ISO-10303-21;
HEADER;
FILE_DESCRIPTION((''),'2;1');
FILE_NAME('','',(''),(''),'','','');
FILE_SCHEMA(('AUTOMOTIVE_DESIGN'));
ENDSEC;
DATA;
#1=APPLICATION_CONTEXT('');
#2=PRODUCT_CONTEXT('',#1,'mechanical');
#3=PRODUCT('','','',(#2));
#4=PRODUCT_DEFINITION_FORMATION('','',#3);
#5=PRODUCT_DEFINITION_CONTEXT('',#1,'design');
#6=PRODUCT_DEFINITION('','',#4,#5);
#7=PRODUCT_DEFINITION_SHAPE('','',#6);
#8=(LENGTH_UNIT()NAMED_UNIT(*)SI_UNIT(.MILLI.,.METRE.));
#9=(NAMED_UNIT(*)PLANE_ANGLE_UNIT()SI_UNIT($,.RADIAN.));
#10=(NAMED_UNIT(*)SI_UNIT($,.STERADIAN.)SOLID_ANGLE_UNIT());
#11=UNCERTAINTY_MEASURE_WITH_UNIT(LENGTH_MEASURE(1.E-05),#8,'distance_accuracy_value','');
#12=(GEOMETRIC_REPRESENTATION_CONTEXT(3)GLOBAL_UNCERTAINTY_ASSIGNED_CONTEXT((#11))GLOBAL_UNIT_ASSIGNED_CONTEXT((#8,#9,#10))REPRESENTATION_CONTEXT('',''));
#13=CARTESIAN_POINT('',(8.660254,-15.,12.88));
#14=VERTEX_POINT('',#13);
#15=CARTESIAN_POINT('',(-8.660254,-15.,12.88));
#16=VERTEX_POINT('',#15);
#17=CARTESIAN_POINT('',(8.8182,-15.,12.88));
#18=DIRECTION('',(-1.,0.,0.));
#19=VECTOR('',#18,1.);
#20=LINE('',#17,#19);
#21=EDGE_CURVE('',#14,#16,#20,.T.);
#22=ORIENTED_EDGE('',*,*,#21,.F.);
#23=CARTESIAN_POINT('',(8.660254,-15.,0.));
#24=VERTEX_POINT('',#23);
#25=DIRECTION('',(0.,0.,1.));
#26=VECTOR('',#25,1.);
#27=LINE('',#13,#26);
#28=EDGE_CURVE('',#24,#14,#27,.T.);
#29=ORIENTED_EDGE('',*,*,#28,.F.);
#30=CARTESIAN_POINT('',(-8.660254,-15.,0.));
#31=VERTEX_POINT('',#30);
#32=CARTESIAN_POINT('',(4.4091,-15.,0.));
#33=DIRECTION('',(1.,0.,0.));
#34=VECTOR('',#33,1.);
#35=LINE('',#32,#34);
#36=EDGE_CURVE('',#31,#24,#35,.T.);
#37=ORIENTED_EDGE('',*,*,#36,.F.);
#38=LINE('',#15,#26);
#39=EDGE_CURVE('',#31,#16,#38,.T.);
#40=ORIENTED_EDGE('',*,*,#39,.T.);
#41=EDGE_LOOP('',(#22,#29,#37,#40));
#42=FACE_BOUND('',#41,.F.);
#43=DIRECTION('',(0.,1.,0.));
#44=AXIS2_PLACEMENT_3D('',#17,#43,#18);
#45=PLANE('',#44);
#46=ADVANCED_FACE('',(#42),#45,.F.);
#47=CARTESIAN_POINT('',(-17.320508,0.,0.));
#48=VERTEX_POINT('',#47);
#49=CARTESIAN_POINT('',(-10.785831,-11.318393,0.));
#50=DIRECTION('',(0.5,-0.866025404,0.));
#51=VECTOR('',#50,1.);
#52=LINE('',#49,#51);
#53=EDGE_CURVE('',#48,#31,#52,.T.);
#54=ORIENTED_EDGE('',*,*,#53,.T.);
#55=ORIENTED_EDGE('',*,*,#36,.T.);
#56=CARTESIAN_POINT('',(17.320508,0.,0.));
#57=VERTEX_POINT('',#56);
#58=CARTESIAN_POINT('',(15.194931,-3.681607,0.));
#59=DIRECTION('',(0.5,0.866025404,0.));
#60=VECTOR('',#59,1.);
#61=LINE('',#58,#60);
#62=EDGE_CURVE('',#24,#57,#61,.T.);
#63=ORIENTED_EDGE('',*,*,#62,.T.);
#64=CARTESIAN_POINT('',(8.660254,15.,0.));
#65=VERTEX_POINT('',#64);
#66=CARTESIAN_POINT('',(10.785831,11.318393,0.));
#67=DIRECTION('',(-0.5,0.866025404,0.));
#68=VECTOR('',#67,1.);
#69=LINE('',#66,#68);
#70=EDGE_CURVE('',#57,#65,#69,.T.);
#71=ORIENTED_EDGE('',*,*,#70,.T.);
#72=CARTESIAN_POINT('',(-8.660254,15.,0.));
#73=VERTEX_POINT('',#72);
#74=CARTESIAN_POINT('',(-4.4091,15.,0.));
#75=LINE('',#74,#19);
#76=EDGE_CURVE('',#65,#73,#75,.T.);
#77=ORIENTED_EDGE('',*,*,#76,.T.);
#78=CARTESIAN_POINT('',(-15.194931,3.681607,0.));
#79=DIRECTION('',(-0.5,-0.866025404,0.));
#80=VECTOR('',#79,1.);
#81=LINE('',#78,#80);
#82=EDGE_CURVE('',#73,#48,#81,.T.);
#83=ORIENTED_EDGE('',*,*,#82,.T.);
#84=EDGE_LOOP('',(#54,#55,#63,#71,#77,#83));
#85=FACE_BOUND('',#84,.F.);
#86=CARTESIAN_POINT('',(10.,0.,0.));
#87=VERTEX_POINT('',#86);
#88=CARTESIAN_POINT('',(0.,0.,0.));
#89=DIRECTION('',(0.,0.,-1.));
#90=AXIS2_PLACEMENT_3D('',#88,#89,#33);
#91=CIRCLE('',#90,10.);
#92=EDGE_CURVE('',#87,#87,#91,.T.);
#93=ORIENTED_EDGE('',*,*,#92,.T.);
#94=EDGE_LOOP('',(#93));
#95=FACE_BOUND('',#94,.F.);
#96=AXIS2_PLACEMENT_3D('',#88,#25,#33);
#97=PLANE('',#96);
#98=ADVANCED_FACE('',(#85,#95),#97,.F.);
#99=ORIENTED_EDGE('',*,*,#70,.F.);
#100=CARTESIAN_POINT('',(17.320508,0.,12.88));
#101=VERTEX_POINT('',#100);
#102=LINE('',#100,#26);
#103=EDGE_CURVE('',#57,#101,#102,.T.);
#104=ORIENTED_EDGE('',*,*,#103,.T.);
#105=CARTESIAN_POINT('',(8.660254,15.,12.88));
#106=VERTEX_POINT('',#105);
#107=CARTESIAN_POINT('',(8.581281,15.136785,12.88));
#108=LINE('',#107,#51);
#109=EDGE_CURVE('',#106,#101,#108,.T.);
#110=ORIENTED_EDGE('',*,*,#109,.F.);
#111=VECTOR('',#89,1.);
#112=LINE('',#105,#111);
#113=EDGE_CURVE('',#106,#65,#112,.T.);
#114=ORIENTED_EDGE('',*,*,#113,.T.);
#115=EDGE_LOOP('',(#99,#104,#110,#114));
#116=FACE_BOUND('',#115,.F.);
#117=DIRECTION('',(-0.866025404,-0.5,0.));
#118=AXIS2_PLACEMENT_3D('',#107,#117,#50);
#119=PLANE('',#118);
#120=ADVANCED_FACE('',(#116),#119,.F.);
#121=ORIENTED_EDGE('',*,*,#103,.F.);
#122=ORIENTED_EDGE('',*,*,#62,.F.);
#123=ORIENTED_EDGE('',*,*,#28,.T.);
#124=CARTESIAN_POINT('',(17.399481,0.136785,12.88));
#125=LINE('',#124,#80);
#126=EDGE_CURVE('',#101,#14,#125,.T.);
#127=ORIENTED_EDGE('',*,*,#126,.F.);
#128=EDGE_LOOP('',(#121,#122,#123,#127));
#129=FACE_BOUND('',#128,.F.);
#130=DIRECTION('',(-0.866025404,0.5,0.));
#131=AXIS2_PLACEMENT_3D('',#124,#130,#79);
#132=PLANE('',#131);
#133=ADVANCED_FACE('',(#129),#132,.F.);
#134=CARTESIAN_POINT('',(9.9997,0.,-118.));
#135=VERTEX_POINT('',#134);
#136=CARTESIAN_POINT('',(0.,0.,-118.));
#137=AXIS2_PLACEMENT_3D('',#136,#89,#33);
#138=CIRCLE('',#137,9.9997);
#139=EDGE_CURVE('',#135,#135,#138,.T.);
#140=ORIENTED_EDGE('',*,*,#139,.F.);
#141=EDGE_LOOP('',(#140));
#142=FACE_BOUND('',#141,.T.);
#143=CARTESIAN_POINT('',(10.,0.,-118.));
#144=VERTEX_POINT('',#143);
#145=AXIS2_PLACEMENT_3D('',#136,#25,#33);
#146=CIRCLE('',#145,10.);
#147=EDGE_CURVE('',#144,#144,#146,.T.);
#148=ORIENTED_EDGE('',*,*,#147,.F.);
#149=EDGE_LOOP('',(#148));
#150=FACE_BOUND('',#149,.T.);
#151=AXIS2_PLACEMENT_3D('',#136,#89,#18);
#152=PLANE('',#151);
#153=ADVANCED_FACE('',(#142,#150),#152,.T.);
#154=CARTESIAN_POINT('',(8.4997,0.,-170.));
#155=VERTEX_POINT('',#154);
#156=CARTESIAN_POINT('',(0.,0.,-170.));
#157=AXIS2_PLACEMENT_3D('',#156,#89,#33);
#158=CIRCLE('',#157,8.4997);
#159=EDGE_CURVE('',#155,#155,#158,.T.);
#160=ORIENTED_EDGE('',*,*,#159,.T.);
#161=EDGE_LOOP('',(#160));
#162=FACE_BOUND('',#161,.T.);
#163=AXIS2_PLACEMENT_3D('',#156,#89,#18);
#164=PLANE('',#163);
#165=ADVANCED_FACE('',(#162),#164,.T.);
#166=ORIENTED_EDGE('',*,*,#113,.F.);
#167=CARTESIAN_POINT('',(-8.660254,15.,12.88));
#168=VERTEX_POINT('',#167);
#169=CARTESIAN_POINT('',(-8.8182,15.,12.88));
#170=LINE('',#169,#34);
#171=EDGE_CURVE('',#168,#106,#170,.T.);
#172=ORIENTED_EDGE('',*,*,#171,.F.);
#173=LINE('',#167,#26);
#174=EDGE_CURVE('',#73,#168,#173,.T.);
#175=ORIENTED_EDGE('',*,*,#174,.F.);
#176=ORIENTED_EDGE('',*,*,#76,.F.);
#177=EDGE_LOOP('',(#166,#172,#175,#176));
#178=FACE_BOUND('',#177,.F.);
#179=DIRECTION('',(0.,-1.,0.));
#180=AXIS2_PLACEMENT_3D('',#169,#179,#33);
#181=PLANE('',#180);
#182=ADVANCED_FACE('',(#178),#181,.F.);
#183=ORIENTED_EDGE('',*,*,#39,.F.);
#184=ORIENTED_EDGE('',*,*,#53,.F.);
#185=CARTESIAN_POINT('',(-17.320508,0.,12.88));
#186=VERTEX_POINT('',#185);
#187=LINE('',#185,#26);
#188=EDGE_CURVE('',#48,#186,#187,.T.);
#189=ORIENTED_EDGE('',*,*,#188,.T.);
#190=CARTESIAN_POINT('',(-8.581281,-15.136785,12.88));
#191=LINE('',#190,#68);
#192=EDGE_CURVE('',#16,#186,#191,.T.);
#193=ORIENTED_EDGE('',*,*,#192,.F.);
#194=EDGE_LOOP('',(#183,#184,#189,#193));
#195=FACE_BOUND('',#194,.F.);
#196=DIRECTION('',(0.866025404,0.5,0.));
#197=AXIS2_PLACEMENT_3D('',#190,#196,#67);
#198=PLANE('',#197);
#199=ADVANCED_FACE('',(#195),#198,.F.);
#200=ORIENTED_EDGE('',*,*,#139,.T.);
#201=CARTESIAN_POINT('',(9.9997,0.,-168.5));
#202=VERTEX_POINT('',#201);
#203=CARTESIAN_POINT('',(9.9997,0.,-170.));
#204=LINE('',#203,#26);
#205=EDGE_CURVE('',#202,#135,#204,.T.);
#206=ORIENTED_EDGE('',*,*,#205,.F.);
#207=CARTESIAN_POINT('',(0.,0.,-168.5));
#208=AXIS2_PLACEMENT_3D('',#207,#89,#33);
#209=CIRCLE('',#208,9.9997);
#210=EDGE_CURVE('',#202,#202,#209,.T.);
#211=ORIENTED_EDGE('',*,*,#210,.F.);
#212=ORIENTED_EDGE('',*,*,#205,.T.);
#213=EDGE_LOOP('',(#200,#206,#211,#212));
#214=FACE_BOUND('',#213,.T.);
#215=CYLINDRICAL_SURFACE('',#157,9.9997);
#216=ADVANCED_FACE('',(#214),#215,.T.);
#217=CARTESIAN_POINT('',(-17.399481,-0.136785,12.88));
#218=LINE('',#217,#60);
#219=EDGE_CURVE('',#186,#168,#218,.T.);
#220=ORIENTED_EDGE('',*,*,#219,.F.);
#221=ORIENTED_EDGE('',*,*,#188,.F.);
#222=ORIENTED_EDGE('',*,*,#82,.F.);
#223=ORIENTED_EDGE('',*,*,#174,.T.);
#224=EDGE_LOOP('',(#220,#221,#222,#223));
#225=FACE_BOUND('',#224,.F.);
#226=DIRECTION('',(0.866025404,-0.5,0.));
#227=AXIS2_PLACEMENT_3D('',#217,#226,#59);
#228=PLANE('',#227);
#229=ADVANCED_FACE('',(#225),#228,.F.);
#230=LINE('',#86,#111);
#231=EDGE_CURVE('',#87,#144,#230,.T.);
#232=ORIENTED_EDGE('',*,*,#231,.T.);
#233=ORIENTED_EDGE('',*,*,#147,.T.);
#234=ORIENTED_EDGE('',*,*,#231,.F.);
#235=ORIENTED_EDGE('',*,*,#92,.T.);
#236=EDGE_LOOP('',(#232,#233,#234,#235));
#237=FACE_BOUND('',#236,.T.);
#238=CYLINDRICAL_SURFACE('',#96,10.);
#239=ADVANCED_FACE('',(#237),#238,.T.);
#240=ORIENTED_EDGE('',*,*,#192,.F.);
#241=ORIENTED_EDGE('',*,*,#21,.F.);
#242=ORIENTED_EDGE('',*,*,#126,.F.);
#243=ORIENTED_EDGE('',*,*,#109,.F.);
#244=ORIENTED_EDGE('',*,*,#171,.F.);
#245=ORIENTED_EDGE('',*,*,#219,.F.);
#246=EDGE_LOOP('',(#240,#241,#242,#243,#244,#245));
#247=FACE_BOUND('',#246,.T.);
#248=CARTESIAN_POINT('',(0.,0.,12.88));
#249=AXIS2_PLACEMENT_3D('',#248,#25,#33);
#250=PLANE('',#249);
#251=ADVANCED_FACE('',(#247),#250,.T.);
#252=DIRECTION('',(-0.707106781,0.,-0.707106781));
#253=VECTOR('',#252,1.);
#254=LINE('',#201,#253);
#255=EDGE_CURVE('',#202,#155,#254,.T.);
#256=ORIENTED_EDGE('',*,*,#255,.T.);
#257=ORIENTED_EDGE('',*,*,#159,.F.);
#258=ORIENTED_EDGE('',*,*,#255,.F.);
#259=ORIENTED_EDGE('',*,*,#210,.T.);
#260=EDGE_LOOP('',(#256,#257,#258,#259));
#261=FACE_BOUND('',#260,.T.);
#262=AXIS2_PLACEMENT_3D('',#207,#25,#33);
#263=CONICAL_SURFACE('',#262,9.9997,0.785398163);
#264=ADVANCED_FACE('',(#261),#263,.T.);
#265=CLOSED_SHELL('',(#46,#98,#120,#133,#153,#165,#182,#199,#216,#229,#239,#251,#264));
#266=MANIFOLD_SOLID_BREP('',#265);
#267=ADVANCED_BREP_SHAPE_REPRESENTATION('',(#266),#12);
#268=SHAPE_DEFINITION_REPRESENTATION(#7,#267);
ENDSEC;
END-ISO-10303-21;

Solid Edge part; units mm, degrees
sketch "Sketch1" plane through (0, 0, 0) normal (0, 0, 1) x (1, 0, 0)
  circle A0 centre (0, 0) radius 17.4
  dimension "D1" = 34.8
extrude "Protrusion1" add sketch "Sketch1" along normal blind 12.88
sketch "Sketch2" plane through (0, 0, 0) normal (0, 0, -1) x (1, 0, 0)
  circle A0 centre (0, 0) radius 10
extrude "Protrusion2" add sketch "Sketch2" along normal blind 170
sketch "Sketch3" plane through (0, 0, -170) normal (0, 0, -1) x (1, 0, 0)
  circle A0 centre (0, 0) radius 9.9997
extrude "Cutout1" cut sketch "Sketch3" against normal blind 52 flip side to cut
chamfer "Chamfer_1" distance 1.5 angle 45 1 edges at (-9.9997, 0, -170)
sketch "Sketch4" plane through (0, 0, 12.88) normal (0, 0, 1) x (1, 0, 0)
  line L0 (-8.8182, 15) -> (8.8182, 15)
  dimension "D1" = 30
extrude "Cutout2" cut sketch "Sketch4" against normal up to next material side at (0, 15.05, 12.88)
pattern_circular "Pattern1" count 6 over 360 about axis through (0, 0, 12.88) along (0, 0, 1) of "Cutout2"
properties part number "24104432"
